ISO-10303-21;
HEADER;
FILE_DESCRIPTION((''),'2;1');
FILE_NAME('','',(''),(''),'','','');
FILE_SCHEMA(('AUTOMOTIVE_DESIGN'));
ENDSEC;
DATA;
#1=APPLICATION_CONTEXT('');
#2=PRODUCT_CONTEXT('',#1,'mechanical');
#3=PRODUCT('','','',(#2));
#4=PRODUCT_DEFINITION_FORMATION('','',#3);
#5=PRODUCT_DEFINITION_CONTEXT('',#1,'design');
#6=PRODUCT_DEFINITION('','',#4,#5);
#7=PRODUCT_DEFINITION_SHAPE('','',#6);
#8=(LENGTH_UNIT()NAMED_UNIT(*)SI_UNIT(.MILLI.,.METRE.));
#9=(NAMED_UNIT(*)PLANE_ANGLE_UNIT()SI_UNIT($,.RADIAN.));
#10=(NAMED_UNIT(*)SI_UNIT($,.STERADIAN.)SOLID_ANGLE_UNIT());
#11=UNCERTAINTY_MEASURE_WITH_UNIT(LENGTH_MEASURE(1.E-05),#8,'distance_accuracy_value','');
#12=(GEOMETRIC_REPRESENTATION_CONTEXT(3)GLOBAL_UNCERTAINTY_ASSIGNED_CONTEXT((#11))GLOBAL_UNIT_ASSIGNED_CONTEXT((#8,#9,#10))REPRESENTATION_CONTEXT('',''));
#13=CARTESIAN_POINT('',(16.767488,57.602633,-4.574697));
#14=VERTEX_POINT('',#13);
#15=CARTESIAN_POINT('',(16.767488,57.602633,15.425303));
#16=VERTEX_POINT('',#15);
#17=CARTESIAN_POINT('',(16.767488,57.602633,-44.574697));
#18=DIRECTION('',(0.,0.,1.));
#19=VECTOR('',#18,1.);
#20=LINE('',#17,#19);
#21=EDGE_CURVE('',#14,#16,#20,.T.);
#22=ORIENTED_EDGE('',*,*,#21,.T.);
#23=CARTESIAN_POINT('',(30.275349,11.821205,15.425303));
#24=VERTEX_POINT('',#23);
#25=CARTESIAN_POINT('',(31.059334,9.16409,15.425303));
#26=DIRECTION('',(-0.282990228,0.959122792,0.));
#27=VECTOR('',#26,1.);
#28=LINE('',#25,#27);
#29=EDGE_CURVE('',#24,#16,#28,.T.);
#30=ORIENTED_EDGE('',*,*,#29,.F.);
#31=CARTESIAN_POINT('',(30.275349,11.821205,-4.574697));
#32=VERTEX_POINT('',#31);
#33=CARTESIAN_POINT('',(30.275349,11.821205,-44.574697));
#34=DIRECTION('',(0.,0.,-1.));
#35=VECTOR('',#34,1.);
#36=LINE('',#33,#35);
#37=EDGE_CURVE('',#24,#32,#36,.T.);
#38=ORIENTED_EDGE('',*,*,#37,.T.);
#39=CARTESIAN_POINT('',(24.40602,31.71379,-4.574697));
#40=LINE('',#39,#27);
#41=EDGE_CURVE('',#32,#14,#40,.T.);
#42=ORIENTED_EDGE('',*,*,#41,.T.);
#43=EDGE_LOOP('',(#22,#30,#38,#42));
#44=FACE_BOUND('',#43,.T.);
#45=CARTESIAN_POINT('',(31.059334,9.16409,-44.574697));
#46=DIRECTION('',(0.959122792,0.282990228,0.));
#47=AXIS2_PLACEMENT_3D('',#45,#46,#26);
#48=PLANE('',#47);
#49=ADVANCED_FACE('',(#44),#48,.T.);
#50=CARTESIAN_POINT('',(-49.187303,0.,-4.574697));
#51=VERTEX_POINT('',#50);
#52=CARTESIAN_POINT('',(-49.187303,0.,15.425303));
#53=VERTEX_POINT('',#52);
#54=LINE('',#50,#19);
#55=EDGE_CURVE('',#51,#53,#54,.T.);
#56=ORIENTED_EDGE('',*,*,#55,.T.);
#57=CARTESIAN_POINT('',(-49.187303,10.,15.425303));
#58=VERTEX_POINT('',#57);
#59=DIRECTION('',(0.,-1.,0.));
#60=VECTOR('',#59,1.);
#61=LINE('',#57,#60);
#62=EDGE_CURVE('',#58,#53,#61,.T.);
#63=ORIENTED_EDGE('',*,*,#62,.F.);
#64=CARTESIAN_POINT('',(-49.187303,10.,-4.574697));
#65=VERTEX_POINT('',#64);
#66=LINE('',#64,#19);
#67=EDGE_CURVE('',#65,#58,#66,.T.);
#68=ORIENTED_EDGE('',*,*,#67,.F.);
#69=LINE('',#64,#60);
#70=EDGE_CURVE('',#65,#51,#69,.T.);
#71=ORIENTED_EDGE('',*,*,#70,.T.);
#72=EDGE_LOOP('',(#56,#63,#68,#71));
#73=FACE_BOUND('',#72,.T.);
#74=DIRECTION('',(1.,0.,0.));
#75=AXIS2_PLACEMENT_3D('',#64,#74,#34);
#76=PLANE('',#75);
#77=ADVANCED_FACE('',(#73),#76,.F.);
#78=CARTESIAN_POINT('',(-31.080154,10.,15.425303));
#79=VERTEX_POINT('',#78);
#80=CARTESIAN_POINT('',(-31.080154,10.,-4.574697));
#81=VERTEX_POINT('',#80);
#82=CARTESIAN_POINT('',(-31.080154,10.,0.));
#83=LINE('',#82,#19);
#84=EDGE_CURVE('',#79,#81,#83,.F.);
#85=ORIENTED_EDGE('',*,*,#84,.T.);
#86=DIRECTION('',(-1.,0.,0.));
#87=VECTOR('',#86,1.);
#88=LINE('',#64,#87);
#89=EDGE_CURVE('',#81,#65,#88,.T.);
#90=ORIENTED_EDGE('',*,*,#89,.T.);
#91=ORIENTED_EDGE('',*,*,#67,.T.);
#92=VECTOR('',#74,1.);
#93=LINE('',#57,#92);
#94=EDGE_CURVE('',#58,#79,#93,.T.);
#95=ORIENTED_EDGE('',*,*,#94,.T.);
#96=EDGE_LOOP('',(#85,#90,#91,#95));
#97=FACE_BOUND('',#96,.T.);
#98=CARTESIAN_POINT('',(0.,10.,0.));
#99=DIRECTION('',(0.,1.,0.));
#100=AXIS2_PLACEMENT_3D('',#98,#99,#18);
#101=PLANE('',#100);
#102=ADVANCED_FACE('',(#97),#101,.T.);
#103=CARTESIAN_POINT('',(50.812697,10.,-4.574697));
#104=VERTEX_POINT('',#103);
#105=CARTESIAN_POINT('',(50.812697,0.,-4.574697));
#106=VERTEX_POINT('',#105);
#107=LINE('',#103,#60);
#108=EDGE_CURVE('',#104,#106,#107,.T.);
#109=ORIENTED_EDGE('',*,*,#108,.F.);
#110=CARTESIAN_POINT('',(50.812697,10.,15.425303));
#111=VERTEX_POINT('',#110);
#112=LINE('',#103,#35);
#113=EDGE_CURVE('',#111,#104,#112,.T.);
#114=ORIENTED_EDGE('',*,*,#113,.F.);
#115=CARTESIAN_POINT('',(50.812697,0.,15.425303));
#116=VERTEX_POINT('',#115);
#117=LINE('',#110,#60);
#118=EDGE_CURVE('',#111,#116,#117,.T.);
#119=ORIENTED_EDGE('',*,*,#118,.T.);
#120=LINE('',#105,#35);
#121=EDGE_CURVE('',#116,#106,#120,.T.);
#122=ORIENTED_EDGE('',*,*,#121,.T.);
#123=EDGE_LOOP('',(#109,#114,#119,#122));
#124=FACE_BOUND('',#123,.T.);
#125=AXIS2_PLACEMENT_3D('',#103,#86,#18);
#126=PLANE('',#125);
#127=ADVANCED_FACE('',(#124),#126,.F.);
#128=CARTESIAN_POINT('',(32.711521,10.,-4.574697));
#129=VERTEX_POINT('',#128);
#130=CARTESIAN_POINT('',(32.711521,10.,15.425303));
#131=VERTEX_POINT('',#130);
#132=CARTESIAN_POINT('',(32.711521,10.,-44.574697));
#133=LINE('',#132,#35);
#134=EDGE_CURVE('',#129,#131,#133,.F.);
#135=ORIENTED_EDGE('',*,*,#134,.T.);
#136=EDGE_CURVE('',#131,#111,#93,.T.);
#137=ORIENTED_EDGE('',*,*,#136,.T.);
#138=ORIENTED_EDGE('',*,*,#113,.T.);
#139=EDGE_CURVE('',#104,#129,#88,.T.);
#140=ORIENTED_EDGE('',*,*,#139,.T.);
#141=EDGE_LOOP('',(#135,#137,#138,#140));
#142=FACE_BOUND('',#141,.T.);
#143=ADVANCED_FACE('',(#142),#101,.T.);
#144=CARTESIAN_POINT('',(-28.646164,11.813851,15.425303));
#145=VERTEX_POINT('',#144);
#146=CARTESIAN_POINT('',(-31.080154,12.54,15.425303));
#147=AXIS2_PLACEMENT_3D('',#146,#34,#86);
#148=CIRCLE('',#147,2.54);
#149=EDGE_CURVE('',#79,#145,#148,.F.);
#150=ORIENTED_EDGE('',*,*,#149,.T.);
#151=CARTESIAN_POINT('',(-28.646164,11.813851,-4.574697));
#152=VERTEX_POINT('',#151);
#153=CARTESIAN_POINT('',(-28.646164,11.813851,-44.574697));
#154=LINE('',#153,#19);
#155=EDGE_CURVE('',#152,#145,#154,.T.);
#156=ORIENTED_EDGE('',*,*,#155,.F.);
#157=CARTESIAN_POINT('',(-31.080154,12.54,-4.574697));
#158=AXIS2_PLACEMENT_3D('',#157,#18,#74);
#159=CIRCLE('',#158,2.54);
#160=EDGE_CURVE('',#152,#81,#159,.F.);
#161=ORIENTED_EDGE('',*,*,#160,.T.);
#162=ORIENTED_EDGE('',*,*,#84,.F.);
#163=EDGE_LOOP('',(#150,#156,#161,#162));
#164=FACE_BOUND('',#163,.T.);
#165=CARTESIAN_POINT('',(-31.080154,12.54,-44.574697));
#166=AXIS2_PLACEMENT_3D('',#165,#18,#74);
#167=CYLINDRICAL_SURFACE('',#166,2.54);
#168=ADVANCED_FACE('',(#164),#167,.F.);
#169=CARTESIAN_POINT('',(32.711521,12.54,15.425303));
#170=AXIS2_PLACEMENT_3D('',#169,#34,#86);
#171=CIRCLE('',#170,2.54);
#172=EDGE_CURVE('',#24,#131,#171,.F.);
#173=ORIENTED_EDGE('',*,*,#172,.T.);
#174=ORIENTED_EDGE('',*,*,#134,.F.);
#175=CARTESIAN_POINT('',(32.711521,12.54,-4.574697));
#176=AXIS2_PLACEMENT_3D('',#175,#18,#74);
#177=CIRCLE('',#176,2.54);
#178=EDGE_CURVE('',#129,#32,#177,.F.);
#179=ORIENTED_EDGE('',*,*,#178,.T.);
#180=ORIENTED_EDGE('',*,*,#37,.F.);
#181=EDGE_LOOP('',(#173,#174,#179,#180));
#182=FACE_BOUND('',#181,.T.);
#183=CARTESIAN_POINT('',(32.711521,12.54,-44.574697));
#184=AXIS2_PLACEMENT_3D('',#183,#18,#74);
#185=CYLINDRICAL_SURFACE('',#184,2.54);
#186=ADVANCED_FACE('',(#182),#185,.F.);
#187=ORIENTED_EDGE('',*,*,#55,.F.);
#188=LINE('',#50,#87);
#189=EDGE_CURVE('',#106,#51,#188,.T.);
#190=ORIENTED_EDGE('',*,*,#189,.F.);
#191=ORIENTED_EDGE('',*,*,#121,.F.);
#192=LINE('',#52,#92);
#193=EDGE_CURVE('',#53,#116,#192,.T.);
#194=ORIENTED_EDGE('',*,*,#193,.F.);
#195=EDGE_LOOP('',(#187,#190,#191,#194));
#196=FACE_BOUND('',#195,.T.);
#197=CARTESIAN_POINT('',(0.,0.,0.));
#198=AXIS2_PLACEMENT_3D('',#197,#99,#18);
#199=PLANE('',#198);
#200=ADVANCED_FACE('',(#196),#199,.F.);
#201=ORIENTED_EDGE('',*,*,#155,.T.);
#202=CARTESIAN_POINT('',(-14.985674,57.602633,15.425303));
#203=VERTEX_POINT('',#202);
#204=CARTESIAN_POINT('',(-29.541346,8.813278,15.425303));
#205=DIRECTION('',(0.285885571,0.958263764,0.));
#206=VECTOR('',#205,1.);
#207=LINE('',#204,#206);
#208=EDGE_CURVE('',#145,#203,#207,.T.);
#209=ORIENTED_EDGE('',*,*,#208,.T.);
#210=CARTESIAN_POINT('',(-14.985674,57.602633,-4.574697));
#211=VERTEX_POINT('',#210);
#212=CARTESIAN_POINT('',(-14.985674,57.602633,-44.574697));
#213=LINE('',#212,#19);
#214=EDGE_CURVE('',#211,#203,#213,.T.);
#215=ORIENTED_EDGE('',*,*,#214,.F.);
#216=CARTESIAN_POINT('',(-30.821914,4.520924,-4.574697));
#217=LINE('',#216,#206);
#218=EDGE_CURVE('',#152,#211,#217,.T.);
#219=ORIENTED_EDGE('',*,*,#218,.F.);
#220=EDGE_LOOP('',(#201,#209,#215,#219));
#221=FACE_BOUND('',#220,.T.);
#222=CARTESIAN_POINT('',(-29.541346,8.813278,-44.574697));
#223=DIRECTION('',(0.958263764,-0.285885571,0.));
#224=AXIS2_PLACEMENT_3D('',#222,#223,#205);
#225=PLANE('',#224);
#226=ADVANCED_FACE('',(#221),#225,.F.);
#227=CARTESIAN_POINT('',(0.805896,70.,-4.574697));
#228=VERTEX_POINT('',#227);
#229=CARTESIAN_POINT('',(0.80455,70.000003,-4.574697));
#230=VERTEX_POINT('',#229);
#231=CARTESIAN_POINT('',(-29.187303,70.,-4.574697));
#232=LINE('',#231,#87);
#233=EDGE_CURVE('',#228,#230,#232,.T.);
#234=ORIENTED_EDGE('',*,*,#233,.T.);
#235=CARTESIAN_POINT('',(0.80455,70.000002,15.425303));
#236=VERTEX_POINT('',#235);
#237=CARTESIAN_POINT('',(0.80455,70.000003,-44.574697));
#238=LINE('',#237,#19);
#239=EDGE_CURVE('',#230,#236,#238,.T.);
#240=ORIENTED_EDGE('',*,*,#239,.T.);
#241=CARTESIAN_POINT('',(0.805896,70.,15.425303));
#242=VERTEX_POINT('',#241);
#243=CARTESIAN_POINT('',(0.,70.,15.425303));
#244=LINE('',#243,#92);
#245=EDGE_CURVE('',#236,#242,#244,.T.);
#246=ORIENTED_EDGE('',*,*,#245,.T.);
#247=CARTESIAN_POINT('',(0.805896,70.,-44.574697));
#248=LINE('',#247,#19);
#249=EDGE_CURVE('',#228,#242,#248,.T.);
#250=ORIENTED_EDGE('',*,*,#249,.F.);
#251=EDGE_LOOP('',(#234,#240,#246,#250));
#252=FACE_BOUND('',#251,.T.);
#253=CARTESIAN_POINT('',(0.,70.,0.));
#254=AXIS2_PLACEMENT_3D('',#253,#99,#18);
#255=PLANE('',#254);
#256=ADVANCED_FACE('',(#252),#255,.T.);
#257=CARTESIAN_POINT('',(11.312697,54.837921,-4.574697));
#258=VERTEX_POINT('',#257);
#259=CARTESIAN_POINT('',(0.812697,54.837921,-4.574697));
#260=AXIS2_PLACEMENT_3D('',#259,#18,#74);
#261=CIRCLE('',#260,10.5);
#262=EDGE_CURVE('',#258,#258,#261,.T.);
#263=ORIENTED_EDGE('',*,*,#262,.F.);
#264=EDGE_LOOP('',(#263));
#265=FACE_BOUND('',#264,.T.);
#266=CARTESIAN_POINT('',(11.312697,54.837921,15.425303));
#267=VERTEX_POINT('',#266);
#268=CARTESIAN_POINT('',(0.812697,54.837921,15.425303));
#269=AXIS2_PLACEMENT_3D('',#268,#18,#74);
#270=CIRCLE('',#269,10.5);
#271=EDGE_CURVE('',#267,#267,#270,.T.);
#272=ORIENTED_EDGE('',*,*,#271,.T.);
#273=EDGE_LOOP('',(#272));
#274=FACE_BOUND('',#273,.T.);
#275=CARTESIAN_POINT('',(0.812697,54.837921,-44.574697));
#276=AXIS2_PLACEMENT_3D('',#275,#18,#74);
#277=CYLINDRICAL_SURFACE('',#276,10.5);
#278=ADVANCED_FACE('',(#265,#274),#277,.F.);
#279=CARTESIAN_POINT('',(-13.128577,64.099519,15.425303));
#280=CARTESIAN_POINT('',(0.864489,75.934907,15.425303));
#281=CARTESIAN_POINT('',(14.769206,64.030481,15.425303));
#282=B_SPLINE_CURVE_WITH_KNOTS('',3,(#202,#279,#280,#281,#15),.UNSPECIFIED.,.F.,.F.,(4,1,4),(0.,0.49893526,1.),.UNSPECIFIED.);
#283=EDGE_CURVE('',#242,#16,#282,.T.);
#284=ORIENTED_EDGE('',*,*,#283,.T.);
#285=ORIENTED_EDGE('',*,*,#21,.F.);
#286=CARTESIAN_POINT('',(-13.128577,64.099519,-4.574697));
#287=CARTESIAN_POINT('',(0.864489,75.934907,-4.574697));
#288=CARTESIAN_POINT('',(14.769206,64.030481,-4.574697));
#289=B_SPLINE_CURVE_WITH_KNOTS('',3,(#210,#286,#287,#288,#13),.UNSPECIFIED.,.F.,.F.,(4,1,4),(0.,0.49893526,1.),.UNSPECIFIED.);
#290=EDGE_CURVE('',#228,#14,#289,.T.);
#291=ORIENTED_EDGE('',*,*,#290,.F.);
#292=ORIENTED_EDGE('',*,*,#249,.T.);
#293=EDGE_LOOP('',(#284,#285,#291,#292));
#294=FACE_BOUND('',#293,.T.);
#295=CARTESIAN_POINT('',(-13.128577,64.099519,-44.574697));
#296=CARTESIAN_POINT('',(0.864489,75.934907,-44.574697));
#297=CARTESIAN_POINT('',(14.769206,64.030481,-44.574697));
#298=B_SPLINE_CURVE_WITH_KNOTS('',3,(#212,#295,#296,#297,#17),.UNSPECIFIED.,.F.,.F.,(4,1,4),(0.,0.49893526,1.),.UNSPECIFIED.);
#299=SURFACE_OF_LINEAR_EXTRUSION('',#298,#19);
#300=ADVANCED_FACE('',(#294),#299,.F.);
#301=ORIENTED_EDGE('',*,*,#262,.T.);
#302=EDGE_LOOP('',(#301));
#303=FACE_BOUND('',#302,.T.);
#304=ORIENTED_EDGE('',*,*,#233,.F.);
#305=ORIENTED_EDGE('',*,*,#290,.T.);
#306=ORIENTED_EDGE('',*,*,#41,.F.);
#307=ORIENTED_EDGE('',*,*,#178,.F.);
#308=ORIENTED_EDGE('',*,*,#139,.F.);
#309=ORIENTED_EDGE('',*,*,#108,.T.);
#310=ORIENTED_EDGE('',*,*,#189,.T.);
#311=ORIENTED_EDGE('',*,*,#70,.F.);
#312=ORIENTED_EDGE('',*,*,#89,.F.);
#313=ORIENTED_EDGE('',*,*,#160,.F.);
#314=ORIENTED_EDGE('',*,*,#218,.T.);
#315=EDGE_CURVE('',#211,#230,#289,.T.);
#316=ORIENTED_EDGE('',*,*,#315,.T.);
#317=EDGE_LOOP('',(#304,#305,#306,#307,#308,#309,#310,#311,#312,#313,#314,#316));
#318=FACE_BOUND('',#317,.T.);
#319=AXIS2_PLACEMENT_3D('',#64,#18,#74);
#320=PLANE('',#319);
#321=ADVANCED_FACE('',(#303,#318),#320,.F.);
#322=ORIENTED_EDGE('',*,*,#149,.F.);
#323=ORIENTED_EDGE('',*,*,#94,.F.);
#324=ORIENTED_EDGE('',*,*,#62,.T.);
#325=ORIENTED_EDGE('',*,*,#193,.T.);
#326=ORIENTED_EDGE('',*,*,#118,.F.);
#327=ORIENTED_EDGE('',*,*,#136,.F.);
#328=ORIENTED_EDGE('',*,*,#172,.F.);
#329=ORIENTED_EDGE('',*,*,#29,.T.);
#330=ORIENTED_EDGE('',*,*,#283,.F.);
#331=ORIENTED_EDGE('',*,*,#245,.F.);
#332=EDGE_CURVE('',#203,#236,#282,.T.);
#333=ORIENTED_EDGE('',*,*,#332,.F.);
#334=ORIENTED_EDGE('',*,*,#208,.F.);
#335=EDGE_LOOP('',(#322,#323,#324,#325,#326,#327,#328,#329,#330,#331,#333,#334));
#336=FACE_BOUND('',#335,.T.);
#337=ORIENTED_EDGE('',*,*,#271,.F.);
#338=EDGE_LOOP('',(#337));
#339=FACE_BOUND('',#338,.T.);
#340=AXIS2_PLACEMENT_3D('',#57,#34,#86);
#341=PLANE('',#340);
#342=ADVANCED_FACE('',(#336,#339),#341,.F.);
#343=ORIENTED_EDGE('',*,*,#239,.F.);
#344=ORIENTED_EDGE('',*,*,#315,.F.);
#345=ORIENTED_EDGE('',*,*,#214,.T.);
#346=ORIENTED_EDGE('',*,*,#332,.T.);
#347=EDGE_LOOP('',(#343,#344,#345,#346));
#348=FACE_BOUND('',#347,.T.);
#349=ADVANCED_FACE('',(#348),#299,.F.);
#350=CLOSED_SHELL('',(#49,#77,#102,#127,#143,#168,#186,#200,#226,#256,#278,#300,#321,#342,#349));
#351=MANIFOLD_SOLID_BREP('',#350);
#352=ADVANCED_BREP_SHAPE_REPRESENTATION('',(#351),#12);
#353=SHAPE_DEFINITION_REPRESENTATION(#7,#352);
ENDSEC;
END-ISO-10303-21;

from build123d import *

# Parameters (mm, degrees)
SKETCH1_W           = 100
SKETCH1_H           = 20
BOSS_EXTRUDE1_DEPTH = 10
SKETCH2_W           = 60
SKETCH2_H           = 20
BOSS_EXTRUDE2_DEPTH = 60
SKETCH3_R           = 10.5
CUT_EXTRUDE1_DEPTH  = 60
CUT_EXTRUDE2_START  = -20
CUT_EXTRUDE2_DEPTH  = 20
FILLET1_R           = 2.54
FILLET2_R           = 2.54


# Read off the part's stored shape, not the designer's step: Cut-Extrude2
with BuildPart() as part:
    # Sketch1 → Boss-Extrude1 (new body)
    with BuildSketch(Plane(origin=(0, 0, 0), x_dir=(1, 0, 0), z_dir=(0, 1, 0))):
        with Locations((0.812697448, -5.425302539)):
            Rectangle(SKETCH1_W, SKETCH1_H)
    extrude(amount=BOSS_EXTRUDE1_DEPTH)

    # Sketch2 → Boss-Extrude2 (add)
    with BuildSketch(Plane(origin=(0, 10, 0), x_dir=(1, 0, 0), z_dir=(0, 1, 0))):
        with Locations((0.812697448, -5.425302539)):
            Rectangle(SKETCH2_W, SKETCH2_H)
    extrude(amount=BOSS_EXTRUDE2_DEPTH)

    # Sketch3 → Cut-Extrude1 (cut)
    with BuildSketch(Plane.XY.offset(15.425302539)):
        with Locations((0.812697448, 54.837920596)):
            Circle(SKETCH3_R)
    extrude(amount=-CUT_EXTRUDE1_DEPTH, mode=Mode.SUBTRACT)

    # Cut-Extrude2 outline → Cut-Extrude2 (cut)
    with BuildSketch(Plane.XY.offset(15.425302539).offset(CUT_EXTRUDE2_START)):
        with BuildLine():
            Line((-29.187302552, 10), (-14.985674084, 57.602633157))
            add(Edge.make_bspline(
                [(-14.985674084, 57.602633157), (-13.129301822, 64.096984003), (-6.152391174, 70.000002699), (0.804550116, 70.000002699)],
                knots=[0, 0, 0, 0, 0.498740566, 0.498740566, 0.498740566, 0.498740566], degree=3))
            Line((0.804550116, 70.000002699), (-29.187302552, 70))
            Line((-29.187302552, 70), (-29.187302552, 10))
        make_face()
        with BuildLine():
            Line((30.812697448, 70), (0.80589599, 70.000002625))
            add(Edge.make_bspline(
                [(0.80589599, 70.000002625), (0.808163145, 70.000002377), (7.799782278, 69.997303833), (14.769205665, 64.030481045), (16.767488499, 57.602633157)],
                knots=[0.498772728, 0.498772728, 0.498772728, 0.498772728, 0.49893526, 1, 1, 1, 1], degree=3))
            Line((16.767488499, 57.602633157), (30.812697448, 10))
            Line((30.812697448, 10), (30.812697448, 70))
        make_face()
    extrude(amount=CUT_EXTRUDE2_DEPTH, mode=Mode.SUBTRACT)

    # Fillet1
    fillet1_edges = [part.edges().sort_by_distance(p)[0] for p in [
        (-29.187302552, 10, 5.425302539),
    ]]
    fillet(fillet1_edges, radius=FILLET1_R)

    # Fillet2
    fillet2_edges = [part.edges().sort_by_distance(p)[0] for p in [
        (30.812697448, 10, 5.425302539),
    ]]
    fillet(fillet2_edges, radius=FILLET2_R)


solid = part.part
